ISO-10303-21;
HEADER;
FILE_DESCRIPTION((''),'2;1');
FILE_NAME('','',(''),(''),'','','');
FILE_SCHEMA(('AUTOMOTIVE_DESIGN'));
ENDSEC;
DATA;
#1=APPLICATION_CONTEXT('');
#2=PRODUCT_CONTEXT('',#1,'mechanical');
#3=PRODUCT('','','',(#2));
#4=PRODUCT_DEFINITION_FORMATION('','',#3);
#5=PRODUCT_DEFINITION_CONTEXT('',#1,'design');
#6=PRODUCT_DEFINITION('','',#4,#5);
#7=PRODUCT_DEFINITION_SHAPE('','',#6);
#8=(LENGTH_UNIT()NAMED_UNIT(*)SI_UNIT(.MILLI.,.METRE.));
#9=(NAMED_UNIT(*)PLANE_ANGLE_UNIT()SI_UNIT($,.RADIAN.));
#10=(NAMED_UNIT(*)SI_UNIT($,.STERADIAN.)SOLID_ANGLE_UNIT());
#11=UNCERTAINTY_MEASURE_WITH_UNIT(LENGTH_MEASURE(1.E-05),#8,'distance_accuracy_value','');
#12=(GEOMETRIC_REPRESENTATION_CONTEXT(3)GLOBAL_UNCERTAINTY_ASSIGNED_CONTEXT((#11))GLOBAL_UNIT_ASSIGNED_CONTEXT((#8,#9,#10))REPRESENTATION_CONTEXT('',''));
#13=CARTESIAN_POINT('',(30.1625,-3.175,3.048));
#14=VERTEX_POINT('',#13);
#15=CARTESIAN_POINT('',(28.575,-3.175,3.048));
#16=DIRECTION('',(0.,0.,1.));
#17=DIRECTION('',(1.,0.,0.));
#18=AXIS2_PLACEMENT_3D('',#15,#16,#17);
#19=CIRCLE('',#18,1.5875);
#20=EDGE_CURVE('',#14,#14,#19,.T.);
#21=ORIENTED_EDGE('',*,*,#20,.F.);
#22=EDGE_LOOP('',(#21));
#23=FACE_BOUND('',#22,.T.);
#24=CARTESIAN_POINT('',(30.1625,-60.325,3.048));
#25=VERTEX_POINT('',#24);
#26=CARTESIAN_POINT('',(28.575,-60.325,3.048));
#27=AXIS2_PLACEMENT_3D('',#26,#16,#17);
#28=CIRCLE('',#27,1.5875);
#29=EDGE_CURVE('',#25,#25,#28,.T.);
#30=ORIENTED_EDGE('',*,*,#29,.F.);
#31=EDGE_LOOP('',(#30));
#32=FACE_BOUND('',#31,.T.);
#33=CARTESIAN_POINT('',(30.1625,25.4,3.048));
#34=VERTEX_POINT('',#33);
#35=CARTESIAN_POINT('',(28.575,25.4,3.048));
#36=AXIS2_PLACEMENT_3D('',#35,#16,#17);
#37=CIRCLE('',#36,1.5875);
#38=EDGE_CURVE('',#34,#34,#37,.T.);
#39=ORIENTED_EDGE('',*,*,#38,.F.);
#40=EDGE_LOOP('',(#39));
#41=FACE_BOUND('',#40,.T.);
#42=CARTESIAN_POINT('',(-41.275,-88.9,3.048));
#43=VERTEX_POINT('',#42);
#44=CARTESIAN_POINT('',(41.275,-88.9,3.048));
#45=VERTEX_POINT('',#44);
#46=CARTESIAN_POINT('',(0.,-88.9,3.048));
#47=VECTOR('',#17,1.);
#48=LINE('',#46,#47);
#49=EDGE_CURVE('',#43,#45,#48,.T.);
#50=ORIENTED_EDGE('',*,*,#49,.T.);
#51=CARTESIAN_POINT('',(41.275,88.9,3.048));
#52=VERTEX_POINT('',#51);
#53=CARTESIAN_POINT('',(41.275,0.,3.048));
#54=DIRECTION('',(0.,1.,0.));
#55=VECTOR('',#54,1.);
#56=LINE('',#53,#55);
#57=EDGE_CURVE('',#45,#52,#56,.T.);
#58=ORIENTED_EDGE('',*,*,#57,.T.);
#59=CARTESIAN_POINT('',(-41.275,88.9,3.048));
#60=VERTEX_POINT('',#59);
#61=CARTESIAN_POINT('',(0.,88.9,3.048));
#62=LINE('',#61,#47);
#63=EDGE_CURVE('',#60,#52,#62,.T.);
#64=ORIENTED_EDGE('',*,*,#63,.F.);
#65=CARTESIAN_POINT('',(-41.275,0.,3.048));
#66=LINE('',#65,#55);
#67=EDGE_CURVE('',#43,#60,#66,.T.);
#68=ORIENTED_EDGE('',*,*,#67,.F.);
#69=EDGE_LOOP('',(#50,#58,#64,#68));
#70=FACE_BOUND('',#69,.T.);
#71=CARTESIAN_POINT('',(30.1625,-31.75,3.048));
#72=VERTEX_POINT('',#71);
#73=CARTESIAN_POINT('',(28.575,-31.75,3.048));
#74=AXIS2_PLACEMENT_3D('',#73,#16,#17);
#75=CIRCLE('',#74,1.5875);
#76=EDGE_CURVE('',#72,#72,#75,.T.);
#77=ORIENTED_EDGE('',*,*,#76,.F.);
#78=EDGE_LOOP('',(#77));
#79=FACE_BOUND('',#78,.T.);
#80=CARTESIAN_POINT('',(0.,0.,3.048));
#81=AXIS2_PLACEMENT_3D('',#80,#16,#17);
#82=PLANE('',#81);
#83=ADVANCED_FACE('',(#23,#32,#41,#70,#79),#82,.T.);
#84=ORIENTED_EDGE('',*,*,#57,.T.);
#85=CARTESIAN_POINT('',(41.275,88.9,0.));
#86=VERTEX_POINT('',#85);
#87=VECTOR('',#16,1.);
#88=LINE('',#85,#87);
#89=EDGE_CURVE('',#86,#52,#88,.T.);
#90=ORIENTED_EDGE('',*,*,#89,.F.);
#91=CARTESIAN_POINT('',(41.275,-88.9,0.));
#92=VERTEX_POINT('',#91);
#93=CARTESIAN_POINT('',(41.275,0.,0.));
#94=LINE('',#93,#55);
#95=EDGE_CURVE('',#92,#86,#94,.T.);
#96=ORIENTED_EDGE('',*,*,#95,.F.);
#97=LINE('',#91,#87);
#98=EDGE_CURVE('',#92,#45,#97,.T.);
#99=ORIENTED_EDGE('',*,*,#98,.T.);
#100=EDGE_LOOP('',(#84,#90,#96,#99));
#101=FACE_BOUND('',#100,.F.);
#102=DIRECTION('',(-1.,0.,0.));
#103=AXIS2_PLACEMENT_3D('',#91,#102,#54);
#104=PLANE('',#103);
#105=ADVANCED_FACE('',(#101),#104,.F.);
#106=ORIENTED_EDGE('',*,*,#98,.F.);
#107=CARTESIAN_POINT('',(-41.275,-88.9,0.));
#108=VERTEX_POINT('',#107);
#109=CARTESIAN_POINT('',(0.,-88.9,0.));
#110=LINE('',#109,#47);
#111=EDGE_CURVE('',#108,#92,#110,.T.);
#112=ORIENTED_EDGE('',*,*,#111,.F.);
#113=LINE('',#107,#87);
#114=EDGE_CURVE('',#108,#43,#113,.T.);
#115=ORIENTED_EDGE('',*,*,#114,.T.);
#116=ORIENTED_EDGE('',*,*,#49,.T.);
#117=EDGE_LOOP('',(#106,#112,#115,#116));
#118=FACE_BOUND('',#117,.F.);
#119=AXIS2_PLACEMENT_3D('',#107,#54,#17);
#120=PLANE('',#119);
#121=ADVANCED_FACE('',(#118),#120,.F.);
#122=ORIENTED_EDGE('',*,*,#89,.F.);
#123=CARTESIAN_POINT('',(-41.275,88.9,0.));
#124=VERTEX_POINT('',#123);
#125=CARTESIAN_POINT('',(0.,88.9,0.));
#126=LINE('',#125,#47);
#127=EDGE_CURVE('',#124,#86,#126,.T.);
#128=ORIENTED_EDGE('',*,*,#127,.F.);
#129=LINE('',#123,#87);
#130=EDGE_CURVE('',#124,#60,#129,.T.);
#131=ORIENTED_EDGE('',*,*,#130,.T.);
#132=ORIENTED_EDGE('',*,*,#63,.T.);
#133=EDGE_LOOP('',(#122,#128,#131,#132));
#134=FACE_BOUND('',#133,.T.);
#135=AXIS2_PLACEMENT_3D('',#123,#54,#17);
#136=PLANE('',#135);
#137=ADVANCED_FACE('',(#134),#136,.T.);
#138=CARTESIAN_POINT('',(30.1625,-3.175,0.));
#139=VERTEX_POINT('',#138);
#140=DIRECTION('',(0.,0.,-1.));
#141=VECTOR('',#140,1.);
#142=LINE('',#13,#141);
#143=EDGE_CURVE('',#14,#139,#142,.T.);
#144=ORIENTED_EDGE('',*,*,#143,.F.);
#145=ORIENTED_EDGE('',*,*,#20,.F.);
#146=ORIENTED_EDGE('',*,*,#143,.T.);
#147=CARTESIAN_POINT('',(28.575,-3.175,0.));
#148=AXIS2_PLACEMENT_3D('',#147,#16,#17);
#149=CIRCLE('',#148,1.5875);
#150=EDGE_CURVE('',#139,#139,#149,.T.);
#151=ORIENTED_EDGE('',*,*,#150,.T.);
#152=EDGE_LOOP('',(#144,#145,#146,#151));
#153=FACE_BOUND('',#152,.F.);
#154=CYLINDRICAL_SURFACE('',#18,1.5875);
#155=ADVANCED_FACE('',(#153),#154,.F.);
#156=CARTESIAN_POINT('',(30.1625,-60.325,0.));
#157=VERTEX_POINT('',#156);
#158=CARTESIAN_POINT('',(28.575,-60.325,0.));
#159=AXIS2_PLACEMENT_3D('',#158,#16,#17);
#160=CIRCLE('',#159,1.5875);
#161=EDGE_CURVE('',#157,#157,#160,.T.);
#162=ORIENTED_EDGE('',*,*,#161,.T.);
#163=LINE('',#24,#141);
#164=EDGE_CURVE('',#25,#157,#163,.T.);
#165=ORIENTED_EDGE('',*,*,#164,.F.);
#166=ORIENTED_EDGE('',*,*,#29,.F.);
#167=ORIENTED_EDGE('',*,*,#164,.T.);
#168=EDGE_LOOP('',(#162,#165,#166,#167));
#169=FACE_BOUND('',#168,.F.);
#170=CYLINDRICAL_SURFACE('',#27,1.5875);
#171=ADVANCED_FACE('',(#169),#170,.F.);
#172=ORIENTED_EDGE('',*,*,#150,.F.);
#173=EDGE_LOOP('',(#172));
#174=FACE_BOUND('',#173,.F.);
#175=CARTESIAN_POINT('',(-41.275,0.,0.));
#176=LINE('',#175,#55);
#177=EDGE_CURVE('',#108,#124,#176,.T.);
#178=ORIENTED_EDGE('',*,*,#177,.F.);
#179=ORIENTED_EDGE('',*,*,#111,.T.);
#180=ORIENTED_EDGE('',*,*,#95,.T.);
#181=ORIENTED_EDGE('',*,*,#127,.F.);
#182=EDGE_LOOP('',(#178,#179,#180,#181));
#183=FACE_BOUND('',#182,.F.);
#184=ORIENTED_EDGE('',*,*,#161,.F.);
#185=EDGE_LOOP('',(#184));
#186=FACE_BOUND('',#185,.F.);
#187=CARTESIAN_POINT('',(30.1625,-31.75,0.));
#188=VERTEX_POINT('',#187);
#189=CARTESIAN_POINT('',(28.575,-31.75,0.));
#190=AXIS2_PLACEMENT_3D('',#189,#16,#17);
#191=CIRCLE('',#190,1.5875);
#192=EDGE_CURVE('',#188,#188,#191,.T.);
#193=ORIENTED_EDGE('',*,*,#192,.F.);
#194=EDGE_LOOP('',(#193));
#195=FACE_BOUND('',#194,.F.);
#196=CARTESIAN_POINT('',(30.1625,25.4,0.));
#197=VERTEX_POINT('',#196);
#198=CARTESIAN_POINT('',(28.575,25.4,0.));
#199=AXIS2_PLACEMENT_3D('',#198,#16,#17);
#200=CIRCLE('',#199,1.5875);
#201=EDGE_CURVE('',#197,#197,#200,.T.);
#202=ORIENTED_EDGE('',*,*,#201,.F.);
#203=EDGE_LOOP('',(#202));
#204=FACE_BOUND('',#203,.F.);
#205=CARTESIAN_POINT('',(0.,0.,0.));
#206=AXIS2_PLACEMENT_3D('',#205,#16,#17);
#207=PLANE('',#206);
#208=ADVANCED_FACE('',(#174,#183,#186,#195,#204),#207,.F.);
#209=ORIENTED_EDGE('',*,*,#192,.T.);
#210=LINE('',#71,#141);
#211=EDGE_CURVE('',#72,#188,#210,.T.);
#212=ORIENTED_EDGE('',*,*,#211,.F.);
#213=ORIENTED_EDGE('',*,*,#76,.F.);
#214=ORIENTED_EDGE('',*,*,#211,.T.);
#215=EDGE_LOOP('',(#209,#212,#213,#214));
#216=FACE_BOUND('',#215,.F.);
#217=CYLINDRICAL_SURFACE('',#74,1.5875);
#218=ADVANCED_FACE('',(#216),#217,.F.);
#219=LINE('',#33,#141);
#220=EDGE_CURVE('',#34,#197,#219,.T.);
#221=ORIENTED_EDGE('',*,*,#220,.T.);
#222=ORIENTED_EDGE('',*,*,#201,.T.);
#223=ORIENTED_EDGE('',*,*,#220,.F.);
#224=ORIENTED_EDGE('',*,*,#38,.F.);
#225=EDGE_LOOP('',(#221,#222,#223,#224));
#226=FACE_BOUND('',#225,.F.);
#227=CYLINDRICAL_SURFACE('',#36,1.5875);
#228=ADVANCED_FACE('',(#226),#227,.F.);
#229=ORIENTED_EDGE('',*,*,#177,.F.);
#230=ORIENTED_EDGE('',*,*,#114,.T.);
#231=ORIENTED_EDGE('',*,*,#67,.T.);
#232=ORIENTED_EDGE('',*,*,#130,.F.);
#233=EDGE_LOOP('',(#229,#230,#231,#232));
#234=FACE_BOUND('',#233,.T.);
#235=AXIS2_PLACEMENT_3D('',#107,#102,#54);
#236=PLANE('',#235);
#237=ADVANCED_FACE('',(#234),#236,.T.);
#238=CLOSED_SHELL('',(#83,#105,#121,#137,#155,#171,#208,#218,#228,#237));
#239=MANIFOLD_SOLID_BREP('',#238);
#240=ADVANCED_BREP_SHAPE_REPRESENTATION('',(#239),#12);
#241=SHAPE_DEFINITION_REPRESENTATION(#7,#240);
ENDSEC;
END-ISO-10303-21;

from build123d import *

# Parameters (mm, degrees)
F0_W     = 82.55
F0_H     = 177.8
F1_DEPTH = 3.048
F2_R     = 1.5875
F3_DEPTH = 25.4


# Not quite as in the source:
# - a feature names something its author has since deleted; it is built from what else it names


with BuildPart() as f1:
    # F0 (on Top) → F1 (new body)
    with BuildSketch(Plane.XY):
        Rectangle(F0_W, F0_H)
    extrude(amount=F1_DEPTH)

    # F2 (on face) → F3 (cut)
    with BuildSketch(Plane.XY.offset(3.048)):
        with Locations((28.575, 25.4)):
            Circle(F2_R)
        with Locations((28.575, -3.175)):
            Circle(F2_R)
        with Locations((28.575, -31.75)):
            Circle(F2_R)
        with Locations((28.575, -60.325)):
            Circle(F2_R)
    extrude(amount=-F3_DEPTH, mode=Mode.SUBTRACT)


solid = f1.part
